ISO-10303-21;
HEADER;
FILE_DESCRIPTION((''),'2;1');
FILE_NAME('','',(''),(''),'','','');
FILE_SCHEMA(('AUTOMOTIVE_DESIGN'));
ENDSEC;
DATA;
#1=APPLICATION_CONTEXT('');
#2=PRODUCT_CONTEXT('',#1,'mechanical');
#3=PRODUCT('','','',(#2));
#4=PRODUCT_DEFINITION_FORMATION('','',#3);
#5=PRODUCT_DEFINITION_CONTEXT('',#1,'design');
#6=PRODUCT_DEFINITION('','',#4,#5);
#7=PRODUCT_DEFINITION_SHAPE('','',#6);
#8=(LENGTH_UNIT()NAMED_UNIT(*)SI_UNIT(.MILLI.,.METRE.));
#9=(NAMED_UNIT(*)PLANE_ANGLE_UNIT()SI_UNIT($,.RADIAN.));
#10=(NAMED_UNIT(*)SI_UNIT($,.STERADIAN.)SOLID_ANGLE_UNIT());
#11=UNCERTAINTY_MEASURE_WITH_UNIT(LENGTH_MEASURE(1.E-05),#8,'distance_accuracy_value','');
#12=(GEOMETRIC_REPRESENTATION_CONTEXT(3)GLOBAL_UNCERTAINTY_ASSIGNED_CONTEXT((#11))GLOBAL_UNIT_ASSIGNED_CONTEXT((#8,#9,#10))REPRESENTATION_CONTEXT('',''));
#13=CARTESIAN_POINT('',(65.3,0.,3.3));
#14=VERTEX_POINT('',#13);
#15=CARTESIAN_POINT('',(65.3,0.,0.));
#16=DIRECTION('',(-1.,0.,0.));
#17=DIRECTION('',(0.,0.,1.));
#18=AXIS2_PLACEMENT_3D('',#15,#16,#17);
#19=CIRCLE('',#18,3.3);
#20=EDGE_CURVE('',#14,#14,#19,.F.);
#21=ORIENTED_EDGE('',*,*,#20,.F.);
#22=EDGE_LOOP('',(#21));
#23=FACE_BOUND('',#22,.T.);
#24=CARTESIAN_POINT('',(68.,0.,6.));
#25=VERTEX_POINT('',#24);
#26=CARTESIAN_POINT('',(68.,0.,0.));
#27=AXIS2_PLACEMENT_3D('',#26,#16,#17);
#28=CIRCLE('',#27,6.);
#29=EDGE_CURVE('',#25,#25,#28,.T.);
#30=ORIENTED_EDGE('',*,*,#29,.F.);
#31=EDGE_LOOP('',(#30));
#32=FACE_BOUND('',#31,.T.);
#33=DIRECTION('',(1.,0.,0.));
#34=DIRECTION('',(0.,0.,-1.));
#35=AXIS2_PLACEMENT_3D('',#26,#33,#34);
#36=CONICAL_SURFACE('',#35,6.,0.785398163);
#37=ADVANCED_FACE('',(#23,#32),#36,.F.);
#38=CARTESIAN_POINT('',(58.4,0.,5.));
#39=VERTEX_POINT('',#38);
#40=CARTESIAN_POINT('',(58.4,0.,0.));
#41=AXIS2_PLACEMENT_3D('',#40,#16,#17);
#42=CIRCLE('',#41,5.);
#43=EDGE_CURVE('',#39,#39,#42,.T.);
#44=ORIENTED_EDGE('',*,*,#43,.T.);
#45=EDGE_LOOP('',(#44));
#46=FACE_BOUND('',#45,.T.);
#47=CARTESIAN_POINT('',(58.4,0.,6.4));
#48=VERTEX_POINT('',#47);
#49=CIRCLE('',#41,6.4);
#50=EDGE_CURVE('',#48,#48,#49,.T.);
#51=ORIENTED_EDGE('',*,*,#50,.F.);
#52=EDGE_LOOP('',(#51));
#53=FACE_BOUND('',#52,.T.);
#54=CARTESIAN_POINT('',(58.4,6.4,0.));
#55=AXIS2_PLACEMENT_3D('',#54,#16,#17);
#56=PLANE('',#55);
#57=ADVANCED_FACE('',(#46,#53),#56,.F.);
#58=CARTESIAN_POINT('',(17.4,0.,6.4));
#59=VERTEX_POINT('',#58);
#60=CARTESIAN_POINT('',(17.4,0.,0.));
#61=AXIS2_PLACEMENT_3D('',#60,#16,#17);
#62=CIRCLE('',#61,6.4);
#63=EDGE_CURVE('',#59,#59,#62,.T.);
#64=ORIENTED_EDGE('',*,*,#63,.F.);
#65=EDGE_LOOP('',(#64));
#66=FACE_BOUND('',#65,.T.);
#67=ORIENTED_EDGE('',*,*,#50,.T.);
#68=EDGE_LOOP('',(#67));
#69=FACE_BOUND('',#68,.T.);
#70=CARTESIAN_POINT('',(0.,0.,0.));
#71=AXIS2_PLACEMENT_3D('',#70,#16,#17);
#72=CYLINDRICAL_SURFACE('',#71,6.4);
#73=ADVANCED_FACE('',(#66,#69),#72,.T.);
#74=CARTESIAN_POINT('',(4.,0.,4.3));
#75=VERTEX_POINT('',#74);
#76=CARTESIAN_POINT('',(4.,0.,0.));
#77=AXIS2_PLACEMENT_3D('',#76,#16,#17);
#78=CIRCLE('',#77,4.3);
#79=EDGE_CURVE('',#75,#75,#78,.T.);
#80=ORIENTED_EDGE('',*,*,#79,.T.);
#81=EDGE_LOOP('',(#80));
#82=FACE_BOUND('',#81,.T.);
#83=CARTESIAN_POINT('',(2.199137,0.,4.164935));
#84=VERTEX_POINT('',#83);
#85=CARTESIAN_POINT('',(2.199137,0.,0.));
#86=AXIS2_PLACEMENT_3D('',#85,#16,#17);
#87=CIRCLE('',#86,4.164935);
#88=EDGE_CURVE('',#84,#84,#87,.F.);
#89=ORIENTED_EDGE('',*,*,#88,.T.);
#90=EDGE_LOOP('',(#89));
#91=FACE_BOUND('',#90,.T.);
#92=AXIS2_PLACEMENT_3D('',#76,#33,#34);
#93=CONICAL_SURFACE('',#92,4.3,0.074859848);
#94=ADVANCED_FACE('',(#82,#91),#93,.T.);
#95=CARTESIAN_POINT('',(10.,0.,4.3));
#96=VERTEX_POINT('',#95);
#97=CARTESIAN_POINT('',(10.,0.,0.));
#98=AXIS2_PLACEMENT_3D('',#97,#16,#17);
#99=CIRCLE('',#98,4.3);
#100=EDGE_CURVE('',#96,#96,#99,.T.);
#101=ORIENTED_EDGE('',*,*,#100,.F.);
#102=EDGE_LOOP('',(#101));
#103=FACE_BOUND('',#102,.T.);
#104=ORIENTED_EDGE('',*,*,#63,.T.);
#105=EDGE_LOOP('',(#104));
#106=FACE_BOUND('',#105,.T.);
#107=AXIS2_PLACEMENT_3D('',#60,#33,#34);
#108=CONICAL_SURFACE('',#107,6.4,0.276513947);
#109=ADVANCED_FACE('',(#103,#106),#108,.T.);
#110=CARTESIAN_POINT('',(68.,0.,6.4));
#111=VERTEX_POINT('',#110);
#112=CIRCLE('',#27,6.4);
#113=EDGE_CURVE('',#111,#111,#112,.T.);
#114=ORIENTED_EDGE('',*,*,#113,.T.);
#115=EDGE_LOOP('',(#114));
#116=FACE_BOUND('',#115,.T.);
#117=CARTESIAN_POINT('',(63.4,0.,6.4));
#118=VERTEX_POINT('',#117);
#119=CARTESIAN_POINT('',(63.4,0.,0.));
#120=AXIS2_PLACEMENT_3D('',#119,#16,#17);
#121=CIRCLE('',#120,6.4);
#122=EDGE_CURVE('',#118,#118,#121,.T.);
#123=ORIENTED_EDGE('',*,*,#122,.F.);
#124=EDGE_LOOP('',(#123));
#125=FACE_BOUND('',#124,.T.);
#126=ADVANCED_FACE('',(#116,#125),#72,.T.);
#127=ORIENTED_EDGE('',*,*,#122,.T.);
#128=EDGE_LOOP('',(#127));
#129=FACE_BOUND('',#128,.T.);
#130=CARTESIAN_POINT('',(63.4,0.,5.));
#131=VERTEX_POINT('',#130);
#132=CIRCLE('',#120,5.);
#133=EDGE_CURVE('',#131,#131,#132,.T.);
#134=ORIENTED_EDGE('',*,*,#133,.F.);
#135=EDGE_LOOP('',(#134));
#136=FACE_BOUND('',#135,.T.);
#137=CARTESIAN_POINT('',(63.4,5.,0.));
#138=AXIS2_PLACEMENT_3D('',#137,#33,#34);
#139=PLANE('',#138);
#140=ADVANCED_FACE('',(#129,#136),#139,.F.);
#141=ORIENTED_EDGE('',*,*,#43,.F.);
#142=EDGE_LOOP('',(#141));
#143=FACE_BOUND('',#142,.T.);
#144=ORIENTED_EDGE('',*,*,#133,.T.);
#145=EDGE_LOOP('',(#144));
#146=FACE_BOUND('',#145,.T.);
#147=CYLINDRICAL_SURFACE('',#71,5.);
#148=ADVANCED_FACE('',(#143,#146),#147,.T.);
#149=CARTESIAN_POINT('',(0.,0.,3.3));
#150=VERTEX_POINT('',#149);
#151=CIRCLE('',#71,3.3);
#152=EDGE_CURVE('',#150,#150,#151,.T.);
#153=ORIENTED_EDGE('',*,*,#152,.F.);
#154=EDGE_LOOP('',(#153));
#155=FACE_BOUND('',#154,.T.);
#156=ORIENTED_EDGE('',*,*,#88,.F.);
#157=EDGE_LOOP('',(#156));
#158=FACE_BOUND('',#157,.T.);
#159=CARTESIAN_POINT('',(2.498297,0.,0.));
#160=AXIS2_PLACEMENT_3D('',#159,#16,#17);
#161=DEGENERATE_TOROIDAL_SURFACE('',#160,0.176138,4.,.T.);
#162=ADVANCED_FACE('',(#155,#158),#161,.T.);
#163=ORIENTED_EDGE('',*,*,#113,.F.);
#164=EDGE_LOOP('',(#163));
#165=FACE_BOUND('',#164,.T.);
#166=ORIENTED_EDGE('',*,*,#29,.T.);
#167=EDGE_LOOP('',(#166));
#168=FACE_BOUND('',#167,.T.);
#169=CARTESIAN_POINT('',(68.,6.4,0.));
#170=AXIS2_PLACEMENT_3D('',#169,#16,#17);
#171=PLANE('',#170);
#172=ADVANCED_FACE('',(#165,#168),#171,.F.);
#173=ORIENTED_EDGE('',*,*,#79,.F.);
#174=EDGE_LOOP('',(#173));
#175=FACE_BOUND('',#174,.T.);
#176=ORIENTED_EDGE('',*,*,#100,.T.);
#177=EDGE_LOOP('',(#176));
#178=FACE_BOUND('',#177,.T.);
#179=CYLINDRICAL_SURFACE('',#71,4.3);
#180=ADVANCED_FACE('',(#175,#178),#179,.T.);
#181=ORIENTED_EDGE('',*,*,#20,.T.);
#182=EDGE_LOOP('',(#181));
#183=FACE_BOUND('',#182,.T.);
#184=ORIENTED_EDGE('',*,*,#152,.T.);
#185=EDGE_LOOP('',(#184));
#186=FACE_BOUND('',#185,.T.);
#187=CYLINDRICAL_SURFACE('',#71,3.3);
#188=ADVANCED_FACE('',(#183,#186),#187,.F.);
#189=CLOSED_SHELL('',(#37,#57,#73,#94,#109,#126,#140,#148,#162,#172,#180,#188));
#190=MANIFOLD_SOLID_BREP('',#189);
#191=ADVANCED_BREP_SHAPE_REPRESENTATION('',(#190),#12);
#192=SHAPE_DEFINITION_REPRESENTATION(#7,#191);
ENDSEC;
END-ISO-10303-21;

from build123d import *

# Parameters (mm, degrees)
FILETE3_R     = 4
CHANFRO7_SIZE = 2.7


with BuildPart() as part:
    # Esboço1 → Revolução1 (revolve)
    with BuildSketch(Plane.XY, mode=Mode.PRIVATE) as revolu_o1_sk:
        Polygon((0, 3.3), (0, 4), (4, 4.3), (10, 4.3), (17.4, 6.4), (58.4, 6.4), (58.4, 5), (63.4, 5), (63.4, 6.4), (68, 6.4), (68, 3.3), align=None)
    revolve(revolu_o1_sk.sketch.rotate(Axis((0, 0, 0), (1, 0, 0)), 90), axis=Axis((0, 0, 0), (1, 0, 0)))

    # Filete3
    # the kernel refuses this fillet: 4 mm, written as the material it takes off along each edge
    with BuildSketch(Plane(origin=(0, 0, 0), x_dir=(0, 0, 1), z_dir=(0, 1, 0))) as filete3_piece_1:
        with BuildLine():
            CenterArc((0.176138028, 2.498296696), FILETE3_R, 321.349060222, 34.361786449)
            Line((4.164935268, 2.199136903), (4.244711213, 2.193153707))
            Line((4.244711213, 2.193153707), (4.079775945, -0.005983196))
            Line((4.079775945, -0.005983196), (4, -0.08))
            ThreePointArc((4, -0.08), (3.65, -0.08), (3.362477239, -0.049965934))
            Line((3.362477239, -0.049965934), (3.3, 0))
        make_face()
    revolve(axis=Axis((0, 0, 0), (1, 0, 0)), mode=Mode.SUBTRACT)

    # Chanfro7
    chanfro7_edges = [part.edges().sort_by_distance(p)[0] for p in [
        (68, 0, -3.3),
    ]]
    chamfer(chanfro7_edges, length=CHANFRO7_SIZE)


solid = part.part
